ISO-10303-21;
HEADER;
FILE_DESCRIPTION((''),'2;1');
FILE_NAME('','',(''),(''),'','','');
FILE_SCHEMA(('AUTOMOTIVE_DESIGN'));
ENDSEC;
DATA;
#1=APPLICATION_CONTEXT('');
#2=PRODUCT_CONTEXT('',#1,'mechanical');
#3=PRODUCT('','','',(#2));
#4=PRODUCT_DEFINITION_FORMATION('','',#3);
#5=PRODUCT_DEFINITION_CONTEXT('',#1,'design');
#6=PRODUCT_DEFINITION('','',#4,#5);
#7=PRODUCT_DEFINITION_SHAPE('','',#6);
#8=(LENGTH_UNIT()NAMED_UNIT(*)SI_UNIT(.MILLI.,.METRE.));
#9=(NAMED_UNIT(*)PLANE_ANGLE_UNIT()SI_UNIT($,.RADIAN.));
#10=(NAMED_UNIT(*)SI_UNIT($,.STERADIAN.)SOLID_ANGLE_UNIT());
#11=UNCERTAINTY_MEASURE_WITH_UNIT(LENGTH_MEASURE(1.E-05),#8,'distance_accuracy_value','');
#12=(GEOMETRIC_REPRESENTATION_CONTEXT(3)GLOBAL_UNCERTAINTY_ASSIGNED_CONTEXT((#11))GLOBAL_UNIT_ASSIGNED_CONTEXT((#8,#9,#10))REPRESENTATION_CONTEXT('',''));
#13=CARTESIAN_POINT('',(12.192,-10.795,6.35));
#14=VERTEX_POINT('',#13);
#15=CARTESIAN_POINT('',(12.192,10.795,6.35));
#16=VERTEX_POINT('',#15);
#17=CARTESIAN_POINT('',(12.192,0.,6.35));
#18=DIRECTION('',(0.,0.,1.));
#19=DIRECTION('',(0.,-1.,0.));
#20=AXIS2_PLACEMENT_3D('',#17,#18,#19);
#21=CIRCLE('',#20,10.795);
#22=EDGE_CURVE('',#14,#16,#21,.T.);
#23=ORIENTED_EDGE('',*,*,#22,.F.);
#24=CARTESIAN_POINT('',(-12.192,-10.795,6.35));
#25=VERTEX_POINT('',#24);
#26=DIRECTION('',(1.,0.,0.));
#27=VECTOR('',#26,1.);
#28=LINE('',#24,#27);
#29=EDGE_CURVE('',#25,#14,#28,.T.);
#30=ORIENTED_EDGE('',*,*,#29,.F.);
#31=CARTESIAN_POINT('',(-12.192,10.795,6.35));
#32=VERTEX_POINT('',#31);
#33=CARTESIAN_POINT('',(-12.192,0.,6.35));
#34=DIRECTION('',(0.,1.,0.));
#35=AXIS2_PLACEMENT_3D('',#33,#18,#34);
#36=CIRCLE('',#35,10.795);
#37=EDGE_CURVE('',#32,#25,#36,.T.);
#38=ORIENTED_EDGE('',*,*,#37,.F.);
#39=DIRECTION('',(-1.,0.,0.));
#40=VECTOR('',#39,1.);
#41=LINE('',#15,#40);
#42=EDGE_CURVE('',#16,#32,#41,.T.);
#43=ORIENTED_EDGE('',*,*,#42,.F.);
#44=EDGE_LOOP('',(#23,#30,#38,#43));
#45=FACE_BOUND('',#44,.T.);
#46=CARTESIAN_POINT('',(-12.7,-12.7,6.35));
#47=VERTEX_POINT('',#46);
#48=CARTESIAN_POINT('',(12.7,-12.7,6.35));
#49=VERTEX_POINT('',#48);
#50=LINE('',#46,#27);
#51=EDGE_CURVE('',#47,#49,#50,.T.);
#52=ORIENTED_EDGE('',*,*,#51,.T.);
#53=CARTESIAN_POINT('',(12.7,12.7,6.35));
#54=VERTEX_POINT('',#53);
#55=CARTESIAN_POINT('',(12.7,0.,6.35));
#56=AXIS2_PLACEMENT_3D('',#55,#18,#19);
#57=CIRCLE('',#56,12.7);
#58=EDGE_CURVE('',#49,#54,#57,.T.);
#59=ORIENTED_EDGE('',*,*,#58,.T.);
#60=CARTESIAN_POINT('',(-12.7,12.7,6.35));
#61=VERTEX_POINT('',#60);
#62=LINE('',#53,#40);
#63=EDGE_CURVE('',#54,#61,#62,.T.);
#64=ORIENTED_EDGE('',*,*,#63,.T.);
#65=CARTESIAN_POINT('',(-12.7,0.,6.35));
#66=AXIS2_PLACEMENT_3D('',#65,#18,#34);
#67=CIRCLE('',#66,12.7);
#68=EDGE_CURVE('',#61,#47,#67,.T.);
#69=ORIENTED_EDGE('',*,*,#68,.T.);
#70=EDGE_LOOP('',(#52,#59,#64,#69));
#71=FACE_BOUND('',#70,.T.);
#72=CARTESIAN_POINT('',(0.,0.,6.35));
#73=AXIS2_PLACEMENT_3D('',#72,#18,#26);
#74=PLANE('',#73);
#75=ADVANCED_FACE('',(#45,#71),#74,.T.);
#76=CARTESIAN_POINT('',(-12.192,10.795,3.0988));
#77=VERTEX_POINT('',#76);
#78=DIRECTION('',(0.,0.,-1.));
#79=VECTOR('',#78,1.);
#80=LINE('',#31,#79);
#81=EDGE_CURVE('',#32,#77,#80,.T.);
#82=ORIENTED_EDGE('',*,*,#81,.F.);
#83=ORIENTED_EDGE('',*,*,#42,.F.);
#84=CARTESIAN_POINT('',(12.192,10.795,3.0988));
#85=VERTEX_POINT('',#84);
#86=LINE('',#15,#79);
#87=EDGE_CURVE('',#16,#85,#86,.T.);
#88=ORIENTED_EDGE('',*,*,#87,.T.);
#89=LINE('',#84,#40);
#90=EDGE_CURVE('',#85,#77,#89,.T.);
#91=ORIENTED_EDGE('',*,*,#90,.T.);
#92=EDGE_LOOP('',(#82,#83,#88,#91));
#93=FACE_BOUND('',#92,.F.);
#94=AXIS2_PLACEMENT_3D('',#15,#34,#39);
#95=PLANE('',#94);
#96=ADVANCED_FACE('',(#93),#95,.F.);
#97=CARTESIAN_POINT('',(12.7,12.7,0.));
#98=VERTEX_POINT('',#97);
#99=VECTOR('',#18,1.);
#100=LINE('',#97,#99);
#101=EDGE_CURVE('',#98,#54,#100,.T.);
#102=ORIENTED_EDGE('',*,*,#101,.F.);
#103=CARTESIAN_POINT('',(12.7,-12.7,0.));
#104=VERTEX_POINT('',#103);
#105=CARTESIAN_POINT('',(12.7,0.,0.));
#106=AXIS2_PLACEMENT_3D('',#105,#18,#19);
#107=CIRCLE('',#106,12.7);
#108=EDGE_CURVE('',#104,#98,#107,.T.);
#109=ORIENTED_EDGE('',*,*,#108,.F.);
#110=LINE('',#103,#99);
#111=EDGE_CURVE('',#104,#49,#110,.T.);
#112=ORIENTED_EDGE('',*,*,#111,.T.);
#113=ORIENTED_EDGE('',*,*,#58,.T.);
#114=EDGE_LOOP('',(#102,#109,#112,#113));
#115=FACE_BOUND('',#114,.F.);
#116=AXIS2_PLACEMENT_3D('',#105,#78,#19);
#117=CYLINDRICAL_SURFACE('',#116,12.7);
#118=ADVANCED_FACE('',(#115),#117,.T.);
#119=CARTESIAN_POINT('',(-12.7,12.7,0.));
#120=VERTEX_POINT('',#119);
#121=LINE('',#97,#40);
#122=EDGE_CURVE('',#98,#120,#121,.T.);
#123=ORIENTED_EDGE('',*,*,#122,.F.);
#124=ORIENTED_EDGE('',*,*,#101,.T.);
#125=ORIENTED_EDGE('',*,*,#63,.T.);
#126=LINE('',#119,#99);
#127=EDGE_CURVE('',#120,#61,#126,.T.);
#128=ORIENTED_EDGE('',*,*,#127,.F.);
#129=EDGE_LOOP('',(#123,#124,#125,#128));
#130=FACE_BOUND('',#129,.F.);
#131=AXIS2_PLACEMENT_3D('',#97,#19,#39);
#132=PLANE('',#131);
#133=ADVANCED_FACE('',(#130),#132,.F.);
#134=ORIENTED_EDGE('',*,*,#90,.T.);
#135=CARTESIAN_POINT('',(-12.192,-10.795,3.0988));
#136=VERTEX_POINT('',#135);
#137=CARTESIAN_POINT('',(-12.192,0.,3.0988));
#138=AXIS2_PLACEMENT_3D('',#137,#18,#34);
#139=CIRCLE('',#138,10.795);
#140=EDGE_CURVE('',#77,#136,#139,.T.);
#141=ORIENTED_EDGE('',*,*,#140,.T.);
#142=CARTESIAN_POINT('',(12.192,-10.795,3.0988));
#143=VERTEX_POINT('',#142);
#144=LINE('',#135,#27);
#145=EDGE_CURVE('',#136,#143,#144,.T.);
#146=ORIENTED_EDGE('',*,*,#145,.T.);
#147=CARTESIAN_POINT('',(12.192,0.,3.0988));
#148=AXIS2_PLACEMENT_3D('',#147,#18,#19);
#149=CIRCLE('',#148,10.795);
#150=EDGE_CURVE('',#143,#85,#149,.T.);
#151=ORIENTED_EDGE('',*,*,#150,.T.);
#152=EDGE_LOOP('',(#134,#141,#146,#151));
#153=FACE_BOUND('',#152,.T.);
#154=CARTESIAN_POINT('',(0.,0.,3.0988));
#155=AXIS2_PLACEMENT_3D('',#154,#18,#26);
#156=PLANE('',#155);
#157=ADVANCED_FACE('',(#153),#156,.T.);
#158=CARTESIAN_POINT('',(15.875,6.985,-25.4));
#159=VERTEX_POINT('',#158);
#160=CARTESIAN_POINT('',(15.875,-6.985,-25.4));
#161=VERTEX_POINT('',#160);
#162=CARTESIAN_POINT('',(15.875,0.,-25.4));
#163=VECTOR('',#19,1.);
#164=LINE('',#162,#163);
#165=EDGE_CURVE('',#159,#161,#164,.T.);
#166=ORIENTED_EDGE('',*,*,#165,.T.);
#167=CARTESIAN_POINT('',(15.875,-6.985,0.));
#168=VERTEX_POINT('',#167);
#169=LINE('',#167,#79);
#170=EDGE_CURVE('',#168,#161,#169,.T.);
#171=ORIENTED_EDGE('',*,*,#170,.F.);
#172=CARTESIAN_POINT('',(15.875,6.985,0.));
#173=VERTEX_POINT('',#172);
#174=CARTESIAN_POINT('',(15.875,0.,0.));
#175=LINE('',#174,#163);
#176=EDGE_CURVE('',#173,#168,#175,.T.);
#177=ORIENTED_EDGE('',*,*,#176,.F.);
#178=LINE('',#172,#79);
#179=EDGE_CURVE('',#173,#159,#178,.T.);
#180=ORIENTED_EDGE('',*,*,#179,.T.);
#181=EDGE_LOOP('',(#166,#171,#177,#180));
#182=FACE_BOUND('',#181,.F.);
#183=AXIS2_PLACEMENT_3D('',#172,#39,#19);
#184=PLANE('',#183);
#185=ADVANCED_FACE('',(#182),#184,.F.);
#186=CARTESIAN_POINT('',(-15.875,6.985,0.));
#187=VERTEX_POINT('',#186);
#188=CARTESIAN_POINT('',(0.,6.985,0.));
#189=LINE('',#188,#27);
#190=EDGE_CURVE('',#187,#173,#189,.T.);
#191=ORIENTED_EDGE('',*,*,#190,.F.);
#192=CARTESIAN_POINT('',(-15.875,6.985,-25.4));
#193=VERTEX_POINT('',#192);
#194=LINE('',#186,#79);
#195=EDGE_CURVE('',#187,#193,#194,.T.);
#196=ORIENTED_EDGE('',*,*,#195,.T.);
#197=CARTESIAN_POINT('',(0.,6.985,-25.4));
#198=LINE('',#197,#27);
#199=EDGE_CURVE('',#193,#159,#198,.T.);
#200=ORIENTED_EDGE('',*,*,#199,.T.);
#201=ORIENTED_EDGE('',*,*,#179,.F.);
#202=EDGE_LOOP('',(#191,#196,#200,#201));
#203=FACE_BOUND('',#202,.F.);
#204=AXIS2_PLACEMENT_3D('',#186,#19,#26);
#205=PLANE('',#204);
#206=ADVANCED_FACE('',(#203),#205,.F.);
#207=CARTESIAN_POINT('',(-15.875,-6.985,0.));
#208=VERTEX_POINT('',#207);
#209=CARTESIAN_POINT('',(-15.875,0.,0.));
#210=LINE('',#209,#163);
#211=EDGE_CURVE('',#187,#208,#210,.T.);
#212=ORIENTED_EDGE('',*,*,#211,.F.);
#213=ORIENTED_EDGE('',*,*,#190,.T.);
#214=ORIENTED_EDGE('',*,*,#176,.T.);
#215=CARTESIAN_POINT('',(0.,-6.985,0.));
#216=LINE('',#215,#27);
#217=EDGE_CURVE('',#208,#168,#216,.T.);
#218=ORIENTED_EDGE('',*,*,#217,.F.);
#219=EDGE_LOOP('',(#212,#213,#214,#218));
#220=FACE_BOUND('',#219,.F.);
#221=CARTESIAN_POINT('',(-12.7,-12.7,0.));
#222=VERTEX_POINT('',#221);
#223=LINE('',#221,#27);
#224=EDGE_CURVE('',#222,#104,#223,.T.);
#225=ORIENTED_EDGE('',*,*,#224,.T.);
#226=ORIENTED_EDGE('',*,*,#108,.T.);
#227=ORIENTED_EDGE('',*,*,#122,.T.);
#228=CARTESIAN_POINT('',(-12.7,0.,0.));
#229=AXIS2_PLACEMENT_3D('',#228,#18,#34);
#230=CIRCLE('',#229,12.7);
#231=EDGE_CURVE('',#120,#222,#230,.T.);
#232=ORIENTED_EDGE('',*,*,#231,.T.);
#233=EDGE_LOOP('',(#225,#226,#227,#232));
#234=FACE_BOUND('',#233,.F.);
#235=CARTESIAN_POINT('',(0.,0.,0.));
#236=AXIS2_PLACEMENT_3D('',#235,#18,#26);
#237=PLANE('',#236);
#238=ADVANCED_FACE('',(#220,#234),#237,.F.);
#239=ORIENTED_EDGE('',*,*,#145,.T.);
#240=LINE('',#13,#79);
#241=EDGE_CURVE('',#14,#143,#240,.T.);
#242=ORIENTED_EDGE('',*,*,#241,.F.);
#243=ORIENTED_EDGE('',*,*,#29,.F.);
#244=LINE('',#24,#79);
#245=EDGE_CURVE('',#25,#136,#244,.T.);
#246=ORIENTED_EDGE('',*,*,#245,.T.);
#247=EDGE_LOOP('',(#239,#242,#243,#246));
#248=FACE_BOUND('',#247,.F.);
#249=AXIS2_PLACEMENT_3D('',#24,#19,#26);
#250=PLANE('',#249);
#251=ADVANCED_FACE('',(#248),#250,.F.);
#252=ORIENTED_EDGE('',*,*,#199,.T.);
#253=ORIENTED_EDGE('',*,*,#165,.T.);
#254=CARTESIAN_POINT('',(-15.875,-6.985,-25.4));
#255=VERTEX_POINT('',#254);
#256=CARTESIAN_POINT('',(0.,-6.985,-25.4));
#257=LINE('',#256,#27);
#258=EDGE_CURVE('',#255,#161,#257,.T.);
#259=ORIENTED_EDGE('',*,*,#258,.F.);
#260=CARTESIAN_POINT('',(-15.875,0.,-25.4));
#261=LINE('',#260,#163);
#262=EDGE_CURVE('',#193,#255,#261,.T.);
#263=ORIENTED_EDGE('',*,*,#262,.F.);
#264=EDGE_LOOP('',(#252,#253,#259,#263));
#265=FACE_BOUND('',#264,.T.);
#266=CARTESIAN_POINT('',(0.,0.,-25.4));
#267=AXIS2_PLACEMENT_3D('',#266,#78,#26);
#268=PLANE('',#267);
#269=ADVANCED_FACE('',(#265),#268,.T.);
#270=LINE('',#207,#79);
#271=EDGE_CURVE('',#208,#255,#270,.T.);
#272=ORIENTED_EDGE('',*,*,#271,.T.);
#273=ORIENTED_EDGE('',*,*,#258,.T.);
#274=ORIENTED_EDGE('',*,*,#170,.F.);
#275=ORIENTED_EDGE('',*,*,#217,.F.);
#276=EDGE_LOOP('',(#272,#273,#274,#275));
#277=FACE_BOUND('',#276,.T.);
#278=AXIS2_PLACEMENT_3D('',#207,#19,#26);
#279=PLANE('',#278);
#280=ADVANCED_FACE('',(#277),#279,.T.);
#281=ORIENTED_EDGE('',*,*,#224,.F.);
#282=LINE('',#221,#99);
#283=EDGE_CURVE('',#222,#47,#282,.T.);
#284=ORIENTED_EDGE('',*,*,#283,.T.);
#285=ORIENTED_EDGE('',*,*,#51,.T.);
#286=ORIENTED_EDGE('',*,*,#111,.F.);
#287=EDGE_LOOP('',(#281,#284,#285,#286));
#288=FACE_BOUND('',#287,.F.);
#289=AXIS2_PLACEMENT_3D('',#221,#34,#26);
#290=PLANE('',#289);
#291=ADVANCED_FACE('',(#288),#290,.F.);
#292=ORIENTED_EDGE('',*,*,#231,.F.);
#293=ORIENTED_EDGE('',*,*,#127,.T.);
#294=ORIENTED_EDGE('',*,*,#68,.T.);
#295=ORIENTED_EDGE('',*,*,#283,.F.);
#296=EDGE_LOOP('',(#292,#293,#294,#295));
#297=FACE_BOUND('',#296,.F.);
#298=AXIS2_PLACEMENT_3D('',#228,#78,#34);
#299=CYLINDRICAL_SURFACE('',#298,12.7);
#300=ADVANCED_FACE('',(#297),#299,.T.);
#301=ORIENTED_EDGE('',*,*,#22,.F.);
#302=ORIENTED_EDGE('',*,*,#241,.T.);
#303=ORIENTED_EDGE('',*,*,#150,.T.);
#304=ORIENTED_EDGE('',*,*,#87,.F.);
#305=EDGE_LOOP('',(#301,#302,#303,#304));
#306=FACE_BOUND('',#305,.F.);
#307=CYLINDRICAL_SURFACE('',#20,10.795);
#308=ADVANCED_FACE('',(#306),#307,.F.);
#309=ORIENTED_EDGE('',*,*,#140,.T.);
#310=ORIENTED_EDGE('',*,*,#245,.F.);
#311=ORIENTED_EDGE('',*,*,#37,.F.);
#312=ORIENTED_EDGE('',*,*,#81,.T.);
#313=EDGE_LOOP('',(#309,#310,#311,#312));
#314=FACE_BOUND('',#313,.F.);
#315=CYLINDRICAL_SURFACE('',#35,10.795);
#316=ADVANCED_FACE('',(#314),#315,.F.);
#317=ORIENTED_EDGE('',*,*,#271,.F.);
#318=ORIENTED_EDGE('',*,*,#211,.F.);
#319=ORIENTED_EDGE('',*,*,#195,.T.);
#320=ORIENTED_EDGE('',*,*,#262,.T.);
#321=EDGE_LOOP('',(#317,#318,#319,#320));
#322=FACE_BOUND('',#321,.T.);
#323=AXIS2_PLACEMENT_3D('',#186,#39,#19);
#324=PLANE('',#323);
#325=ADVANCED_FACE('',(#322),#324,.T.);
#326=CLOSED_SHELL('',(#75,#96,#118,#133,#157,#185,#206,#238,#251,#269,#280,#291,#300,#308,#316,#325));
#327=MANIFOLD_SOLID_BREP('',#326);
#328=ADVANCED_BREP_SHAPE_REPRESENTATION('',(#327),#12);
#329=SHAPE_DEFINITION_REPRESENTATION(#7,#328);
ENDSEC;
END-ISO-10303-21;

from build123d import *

# Parameters (mm, degrees)
F1_DEPTH = 6.35
F2_W     = 31.75
F2_H     = 13.97
F3_DEPTH = 25.4
F5_DEPTH = 3.2512


# Not quite as in the source:
# - a feature names something its author has since deleted; it is built from what else it names


with BuildPart() as f1:
    # F0 (on Top) → F1 (new body)
    with BuildSketch(Plane.XY):
        with BuildLine():
            Line((-12.7, -12.7), (12.7, -12.7))
            ThreePointArc((12.7, -12.7), (25.4, 0), (12.7, 12.7))
            Line((12.7, 12.7), (-12.7, 12.7))
            ThreePointArc((-12.7, 12.7), (-25.4, 0), (-12.7, -12.7))
        make_face()
    extrude(amount=F1_DEPTH)

    # F2 (on face) → F3 (join)
    with BuildSketch(Plane(origin=(0, 0, 0), x_dir=(1, 0, 0), z_dir=(0, 0, -1))):
        Rectangle(F2_W, F2_H)
    extrude(amount=F3_DEPTH)

    # F4 (on face) → F5 (cut)
    with BuildSketch(Plane.XY.offset(6.35)):
        with BuildLine():
            Line((-12.192, -10.795), (12.192, -10.795))
            ThreePointArc((12.192, -10.795), (22.987, 0), (12.192, 10.795))
            Line((12.192, 10.795), (-12.192, 10.795))
            ThreePointArc((-12.192, 10.795), (-22.987, 0), (-12.192, -10.795))
        make_face()
    extrude(amount=-F5_DEPTH, mode=Mode.SUBTRACT)


solid = f1.part
